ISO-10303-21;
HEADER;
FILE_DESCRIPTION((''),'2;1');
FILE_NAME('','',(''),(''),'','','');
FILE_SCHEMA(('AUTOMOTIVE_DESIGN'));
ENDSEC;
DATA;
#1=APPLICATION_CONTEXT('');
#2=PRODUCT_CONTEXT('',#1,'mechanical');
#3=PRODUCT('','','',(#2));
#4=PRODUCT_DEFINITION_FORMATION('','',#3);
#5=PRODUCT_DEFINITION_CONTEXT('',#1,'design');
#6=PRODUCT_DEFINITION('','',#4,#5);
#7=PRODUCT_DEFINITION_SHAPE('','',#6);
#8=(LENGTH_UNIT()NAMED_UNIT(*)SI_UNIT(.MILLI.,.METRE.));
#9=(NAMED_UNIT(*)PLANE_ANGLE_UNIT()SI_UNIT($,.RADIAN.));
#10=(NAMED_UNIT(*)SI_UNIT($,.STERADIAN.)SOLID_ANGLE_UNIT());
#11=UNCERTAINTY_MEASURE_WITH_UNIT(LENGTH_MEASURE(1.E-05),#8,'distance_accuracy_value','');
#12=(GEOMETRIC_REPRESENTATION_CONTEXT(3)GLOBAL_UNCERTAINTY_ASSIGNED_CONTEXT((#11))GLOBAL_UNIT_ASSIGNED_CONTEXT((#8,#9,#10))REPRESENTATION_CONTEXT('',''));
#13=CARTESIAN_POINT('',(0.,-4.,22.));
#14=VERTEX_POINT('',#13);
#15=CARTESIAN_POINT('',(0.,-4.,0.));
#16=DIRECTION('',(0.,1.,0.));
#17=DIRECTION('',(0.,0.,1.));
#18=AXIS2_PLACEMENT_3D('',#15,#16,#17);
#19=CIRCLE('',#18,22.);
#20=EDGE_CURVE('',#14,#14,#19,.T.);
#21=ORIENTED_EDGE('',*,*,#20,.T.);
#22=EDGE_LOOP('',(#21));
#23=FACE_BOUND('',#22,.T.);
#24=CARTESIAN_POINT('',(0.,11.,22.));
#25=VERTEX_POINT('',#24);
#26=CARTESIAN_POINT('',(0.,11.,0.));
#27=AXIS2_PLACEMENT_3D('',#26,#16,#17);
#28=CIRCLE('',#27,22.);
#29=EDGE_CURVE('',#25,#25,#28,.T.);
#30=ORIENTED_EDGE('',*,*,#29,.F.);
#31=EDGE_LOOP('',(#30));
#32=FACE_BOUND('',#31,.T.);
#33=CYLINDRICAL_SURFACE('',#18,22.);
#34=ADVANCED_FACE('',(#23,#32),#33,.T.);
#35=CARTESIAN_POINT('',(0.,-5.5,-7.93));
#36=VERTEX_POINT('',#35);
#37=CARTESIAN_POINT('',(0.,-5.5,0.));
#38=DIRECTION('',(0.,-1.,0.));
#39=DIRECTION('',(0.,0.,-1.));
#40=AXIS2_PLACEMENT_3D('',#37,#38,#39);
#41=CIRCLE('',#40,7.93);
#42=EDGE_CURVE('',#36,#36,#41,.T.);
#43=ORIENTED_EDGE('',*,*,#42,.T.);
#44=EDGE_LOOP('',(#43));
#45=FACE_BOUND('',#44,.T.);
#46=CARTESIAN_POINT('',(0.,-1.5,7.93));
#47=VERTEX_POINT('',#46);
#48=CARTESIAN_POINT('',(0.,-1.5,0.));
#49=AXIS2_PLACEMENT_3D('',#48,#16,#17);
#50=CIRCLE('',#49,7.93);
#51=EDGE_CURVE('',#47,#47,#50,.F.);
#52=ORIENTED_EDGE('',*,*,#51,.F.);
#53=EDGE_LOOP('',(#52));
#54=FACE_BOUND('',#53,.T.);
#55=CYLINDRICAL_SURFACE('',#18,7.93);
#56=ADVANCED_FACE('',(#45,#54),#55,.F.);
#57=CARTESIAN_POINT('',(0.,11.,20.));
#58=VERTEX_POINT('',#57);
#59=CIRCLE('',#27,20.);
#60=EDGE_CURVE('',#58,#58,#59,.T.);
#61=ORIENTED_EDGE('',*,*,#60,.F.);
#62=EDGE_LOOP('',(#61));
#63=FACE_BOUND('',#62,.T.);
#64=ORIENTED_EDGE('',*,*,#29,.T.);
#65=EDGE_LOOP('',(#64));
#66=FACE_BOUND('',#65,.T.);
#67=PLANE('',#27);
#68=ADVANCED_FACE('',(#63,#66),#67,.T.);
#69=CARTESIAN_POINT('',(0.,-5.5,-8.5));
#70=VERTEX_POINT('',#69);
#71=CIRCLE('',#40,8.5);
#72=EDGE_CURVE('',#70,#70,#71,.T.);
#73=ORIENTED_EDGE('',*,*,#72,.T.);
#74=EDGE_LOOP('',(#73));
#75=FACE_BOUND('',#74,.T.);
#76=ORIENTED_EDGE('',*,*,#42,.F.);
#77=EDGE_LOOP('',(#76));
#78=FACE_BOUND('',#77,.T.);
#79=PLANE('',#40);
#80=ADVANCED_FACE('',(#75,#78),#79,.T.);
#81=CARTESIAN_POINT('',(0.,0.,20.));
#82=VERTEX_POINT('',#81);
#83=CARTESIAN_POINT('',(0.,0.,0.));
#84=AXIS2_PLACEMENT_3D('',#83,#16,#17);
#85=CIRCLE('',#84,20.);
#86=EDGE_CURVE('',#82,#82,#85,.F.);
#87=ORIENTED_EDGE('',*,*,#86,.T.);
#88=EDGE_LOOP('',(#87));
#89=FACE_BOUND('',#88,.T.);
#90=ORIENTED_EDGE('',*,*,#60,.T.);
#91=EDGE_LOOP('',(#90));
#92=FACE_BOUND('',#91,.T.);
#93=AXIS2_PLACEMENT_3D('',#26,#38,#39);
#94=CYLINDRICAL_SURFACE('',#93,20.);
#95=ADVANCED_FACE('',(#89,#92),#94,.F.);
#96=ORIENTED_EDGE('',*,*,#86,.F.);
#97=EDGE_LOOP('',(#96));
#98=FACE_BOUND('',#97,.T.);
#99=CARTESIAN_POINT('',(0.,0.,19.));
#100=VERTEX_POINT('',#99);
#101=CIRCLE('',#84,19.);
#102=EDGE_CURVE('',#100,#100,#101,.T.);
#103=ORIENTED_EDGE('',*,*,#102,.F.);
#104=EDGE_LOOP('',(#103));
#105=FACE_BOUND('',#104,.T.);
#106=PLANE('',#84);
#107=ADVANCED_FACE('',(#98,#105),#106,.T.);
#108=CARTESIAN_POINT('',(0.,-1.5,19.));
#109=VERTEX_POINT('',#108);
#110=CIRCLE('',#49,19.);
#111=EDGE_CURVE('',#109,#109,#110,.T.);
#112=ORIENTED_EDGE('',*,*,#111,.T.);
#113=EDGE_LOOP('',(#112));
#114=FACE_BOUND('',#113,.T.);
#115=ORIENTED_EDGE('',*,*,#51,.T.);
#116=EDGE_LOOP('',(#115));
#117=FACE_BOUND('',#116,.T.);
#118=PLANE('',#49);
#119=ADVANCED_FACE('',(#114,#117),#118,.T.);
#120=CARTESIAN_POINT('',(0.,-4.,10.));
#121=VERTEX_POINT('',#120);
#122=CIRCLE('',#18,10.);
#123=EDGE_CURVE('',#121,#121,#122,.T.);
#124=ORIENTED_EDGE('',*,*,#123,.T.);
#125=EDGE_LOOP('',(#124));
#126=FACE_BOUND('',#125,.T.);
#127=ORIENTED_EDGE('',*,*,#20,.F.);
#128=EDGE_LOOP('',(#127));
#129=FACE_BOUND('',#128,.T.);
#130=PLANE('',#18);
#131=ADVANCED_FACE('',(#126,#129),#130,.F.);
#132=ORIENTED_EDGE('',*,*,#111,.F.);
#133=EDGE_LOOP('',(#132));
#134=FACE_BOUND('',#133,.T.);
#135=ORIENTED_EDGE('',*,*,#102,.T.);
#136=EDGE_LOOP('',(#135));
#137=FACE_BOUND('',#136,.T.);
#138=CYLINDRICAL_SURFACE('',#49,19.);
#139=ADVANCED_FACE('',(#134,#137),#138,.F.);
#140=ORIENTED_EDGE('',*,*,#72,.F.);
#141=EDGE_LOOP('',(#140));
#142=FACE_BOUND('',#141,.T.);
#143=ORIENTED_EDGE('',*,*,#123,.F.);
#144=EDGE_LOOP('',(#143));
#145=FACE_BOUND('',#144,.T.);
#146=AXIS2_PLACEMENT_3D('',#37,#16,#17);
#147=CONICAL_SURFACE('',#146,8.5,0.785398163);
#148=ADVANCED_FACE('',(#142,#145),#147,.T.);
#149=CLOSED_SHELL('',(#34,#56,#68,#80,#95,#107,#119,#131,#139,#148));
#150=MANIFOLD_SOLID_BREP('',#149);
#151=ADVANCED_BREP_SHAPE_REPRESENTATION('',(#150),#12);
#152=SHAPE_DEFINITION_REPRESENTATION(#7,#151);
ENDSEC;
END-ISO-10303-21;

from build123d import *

# Parameters (mm, degrees)
SKETCH1_R           = 22
SKETCH1_R_2         = 7.93
BOSS_EXTRUDE1_DEPTH = 4
BOSS_EXTRUDE2_START = 11
SKETCH1_3_R         = 22
SKETCH1_3_R_2       = 20
BOSS_EXTRUDE2_DEPTH = 11
SKETCH1_4_R         = 19
CUT_EXTRUDE1_DEPTH  = 1.5
SKETCH3_R           = 11
SKETCH3_R_2         = 7.93
BOSS_EXTRUDE3_DEPTH = 1.5
CHAMFER1_SIZE       = 2.5


with BuildPart() as part:
    # Sketch1 → Boss-Extrude1 (new body)
    with BuildSketch(Plane(origin=(0, 0, 0), x_dir=(1, 0, 0), z_dir=(0, 1, 0))):
        with Locations(Location((0, 0, 0), (0, 0, 270))):
            Circle(SKETCH1_R)
        with Locations(Location((0, 0, 0), (0, 0, 270))):
            Circle(SKETCH1_R_2, mode=Mode.SUBTRACT)
    extrude(amount=-BOSS_EXTRUDE1_DEPTH)

    # Sketch1<3> → Boss-Extrude2 (add)
    with BuildSketch(Plane(origin=(0, 0, 0), x_dir=(1, 0, 0), z_dir=(0, 1, 0)).offset(BOSS_EXTRUDE2_START)):
        with Locations(Location((0, 0, 0), (0, 0, 270))):
            Circle(SKETCH1_3_R)
        with Locations(Location((0, 0, 0), (0, 0, 270))):
            Circle(SKETCH1_3_R_2, mode=Mode.SUBTRACT)
    extrude(amount=-BOSS_EXTRUDE2_DEPTH)

    # Sketch1<4> → Cut-Extrude1 (cut)
    with BuildSketch(Plane(origin=(0, 0, 0), x_dir=(1, 0, 0), z_dir=(0, 1, 0))):
        with Locations(Location((0, 0, 0), (0, 0, 270))):
            Circle(SKETCH1_4_R)
    extrude(amount=-CUT_EXTRUDE1_DEPTH, mode=Mode.SUBTRACT)

    # Sketch3 → Boss-Extrude3 (add)
    with BuildSketch(Plane.XZ.offset(4)):
        with Locations(Location((0, 0, 0), (0, 0, 90))):
            Circle(SKETCH3_R)
        with Locations(Location((0, 0, 0), (0, 0, 90))):
            Circle(SKETCH3_R_2, mode=Mode.SUBTRACT)
    extrude(amount=BOSS_EXTRUDE3_DEPTH)

    # Chamfer1
    # the kernel refuses this chamfer: 2.5 mm, written as the material it takes off along each edge
    with BuildSketch(Plane(origin=(0, -5.5, 0), x_dir=(0, 0, 1), z_dir=(1, 0, 0))) as chamfer1_piece_1_section:
        Polygon((11 - CHAMFER1_SIZE, 0), (11, -CHAMFER1_SIZE), (11, 0), align=None)
    chamfer1_piece_1 = revolve(axis=Axis((0, -5.5, 0), (0, -1, 0)), mode=Mode.PRIVATE)
    chamfer1_piece_1 = split(chamfer1_piece_1, bisect_by=Plane(origin=(0, -4, -9.254586784), z_dir=(0, -1, 0)), keep=Keep.TOP, mode=Mode.PRIVATE)
    add(chamfer1_piece_1, mode=Mode.SUBTRACT)


solid = part.part
